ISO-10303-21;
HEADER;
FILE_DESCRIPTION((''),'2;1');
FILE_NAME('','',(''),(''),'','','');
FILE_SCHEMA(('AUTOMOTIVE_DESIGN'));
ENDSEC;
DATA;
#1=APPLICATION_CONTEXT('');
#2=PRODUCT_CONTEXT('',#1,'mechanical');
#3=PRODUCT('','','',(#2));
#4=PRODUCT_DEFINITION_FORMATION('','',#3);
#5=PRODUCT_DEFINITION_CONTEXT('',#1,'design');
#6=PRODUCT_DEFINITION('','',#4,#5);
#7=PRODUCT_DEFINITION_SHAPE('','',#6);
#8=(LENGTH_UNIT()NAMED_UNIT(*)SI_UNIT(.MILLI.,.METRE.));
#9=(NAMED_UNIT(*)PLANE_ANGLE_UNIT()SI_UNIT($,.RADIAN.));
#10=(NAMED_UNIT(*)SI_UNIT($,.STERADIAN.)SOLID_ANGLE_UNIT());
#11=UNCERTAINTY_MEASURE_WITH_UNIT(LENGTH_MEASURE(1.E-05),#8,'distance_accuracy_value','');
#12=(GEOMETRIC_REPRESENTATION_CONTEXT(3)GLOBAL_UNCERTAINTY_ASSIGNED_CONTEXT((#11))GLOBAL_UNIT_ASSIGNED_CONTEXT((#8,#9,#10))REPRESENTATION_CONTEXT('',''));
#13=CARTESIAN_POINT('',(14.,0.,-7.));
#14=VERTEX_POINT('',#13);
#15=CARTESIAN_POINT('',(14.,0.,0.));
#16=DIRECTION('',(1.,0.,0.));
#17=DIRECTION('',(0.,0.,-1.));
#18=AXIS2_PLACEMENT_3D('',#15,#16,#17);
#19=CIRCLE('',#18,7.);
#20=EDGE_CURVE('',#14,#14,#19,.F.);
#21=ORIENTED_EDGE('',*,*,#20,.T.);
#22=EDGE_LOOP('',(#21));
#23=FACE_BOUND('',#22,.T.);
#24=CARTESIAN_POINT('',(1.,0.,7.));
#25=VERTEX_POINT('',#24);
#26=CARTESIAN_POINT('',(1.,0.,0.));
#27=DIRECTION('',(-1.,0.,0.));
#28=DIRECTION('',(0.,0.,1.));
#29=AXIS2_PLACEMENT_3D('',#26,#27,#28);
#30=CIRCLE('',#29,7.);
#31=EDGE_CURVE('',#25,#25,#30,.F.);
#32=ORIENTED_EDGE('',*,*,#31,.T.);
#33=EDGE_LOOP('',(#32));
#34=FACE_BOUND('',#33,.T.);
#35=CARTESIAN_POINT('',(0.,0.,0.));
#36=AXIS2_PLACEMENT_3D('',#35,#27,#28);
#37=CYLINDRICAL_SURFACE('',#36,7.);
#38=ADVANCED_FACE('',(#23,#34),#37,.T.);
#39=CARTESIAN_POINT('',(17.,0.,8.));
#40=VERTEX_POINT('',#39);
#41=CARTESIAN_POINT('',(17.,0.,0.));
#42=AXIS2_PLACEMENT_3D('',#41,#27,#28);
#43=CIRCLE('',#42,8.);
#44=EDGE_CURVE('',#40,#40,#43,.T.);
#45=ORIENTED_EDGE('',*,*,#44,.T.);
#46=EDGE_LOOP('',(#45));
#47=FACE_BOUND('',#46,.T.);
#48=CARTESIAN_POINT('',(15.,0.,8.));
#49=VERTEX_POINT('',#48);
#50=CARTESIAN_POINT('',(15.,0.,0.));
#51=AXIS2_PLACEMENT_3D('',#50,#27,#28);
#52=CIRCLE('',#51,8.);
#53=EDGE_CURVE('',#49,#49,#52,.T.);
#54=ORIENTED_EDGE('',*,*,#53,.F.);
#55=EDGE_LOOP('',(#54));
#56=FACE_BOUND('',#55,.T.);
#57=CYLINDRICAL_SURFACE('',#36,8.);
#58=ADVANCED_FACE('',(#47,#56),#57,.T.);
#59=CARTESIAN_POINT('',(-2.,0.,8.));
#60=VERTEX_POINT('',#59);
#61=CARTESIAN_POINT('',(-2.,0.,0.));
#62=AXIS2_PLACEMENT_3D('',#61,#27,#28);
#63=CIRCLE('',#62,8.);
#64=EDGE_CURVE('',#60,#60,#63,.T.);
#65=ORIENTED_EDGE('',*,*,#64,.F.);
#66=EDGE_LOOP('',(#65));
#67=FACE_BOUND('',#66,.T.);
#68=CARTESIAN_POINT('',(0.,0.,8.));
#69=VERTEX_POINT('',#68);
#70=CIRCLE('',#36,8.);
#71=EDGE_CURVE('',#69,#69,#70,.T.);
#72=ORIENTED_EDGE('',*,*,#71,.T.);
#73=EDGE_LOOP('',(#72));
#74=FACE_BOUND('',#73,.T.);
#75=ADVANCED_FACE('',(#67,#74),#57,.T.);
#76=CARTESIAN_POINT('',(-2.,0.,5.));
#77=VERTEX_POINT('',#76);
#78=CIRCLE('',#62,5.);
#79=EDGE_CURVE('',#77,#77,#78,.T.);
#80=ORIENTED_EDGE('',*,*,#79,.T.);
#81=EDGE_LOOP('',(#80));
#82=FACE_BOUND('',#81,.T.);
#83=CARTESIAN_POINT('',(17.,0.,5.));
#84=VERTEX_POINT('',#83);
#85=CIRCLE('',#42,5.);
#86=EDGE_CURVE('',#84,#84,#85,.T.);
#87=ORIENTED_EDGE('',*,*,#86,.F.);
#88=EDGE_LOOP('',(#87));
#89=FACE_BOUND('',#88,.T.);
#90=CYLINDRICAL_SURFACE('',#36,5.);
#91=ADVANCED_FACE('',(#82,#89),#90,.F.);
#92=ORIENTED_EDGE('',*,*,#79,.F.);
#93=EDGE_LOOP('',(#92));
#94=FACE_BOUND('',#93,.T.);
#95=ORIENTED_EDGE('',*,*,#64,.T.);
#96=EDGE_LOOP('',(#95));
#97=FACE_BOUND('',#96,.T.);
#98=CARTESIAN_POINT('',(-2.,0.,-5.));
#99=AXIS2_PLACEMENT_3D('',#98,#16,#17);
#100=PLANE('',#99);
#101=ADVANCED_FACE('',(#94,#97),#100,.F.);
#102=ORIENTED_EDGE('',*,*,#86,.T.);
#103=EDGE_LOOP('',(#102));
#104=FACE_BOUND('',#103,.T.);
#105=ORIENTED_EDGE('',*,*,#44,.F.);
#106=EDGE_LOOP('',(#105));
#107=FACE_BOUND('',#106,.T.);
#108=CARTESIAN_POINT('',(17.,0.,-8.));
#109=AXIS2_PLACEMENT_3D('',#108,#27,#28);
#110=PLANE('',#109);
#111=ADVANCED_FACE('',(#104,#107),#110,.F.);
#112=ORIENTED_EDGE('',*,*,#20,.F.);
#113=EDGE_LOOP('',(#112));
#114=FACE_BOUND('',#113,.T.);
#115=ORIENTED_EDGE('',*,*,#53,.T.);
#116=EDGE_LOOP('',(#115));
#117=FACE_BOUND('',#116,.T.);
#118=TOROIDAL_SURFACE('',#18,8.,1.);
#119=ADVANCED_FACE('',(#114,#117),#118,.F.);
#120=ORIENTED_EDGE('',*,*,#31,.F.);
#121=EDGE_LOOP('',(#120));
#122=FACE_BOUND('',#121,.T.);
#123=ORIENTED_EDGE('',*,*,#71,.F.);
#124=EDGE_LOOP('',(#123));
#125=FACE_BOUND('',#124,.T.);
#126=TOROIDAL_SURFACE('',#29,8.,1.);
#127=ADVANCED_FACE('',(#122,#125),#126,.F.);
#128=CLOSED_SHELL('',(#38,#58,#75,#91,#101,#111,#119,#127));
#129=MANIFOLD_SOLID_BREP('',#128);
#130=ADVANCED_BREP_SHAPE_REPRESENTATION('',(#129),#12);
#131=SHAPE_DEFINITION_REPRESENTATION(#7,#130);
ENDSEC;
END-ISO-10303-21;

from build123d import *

# Parameters (mm, degrees)
FILLET1_R = 1


with BuildPart() as part:
    # Sketch1 → Revolve1 (revolve)
    with BuildSketch(Plane(origin=(0, 0, 0), x_dir=(1, 0, 0), z_dir=(0, 1, 0)), mode=Mode.PRIVATE) as revolve1_sk:
        Polygon((0, 7), (15, 7), (15, 8), (17, 8), (17, 5), (-2, 5), (-2, 8), (0, 8), align=None)
    revolve(revolve1_sk.sketch.rotate(Axis((0, 0, 0), (1, 0, 0)), 180), axis=Axis((0, 0, 0), (1, 0, 0)))

    # Fillet1
    fillet1_edges = [part.edges().sort_by_distance(p)[0] for p in [
        (0, 0, -7),
        (15, 0, -7),
    ]]
    fillet(fillet1_edges, radius=FILLET1_R - 0.0001)  # a hair under: the kernel refuses the full size


solid = part.part
